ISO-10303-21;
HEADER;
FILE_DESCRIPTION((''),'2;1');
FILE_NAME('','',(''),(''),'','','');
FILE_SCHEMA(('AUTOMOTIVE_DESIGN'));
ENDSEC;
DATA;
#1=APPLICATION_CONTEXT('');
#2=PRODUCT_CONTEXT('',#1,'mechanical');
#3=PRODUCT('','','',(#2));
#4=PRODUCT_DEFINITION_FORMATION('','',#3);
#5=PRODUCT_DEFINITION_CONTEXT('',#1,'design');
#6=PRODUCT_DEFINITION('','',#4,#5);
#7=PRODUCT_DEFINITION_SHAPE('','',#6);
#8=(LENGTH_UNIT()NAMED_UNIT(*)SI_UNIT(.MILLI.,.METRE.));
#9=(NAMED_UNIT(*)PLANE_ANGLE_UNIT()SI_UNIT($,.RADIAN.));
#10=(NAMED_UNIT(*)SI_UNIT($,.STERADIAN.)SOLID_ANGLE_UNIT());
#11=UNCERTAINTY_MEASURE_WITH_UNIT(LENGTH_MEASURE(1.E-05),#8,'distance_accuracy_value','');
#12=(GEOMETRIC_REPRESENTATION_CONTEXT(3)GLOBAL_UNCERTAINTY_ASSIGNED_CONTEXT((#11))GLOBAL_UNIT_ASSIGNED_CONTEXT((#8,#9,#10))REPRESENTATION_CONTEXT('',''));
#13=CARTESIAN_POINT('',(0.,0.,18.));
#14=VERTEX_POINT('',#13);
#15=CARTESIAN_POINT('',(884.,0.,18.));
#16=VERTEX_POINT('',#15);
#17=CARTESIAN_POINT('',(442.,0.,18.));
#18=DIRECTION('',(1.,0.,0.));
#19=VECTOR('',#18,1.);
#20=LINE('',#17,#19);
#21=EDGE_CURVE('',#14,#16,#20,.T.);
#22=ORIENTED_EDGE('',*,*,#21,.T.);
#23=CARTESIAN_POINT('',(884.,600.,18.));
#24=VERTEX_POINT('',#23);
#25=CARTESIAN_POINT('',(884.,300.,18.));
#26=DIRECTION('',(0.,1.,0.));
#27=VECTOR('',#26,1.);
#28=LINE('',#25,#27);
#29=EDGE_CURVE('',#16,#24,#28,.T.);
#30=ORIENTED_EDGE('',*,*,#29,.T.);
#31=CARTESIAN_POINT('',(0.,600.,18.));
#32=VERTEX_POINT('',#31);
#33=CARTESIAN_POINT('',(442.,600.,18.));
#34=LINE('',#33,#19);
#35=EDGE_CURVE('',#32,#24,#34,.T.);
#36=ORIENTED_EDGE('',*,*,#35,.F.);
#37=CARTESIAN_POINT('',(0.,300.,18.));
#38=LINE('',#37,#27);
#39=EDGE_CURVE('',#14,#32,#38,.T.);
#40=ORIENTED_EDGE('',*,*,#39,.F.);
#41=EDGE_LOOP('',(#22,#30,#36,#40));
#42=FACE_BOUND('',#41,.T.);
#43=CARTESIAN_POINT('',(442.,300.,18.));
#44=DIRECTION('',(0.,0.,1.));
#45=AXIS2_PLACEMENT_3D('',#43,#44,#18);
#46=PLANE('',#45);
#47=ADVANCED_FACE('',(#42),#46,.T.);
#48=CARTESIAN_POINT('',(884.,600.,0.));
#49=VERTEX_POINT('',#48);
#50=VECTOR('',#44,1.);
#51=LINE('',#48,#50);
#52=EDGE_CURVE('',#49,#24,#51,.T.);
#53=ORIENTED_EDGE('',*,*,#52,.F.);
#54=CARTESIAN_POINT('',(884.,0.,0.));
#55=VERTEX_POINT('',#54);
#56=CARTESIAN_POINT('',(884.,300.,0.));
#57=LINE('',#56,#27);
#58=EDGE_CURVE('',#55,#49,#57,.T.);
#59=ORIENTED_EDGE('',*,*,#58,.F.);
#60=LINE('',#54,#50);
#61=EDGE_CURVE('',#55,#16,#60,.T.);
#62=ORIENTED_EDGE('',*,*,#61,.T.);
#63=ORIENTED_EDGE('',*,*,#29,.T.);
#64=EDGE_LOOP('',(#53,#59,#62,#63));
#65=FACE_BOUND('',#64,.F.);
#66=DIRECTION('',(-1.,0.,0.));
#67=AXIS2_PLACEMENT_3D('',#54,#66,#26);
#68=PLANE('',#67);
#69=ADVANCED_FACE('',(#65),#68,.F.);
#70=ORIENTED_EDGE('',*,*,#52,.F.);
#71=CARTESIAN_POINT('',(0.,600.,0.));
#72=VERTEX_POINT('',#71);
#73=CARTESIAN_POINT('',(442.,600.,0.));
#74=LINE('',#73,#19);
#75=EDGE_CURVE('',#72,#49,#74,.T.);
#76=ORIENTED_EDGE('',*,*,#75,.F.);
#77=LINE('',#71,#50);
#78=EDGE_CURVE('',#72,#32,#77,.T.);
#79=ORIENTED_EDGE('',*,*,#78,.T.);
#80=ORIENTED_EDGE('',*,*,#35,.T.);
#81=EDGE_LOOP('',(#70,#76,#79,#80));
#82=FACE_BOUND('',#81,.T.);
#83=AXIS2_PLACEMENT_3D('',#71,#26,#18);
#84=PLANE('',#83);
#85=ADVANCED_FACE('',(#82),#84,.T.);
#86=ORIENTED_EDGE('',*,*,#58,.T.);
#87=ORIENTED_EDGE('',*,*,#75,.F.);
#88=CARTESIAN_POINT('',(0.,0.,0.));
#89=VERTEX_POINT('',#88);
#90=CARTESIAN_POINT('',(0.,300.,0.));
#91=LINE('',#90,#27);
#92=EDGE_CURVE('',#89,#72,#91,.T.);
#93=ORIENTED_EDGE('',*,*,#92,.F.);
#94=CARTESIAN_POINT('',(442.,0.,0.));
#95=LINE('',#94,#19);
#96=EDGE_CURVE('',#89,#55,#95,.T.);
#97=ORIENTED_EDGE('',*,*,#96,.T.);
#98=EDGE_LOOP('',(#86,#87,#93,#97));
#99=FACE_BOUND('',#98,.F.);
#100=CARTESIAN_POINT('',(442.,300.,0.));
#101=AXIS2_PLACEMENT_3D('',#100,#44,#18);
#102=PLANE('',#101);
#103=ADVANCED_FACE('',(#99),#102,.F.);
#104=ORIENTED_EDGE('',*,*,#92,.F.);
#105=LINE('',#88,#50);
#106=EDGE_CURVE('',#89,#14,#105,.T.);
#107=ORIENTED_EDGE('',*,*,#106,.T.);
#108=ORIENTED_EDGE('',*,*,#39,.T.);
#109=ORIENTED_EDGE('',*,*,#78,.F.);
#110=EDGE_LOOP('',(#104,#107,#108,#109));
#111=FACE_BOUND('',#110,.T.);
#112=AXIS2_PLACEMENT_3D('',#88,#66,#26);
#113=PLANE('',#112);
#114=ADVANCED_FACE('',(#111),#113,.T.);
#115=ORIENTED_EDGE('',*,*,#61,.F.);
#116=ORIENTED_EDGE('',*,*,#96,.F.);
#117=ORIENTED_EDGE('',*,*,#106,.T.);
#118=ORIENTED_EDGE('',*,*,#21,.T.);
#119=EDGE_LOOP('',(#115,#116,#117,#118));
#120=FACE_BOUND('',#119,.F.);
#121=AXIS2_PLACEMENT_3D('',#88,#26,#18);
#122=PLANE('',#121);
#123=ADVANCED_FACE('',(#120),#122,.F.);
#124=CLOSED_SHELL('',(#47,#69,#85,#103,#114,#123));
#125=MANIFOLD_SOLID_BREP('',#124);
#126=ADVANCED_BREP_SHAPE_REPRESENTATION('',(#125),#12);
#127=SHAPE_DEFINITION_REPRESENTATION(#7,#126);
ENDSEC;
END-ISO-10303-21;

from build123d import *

# Parameters (mm, degrees)
F0_W     = 884
F0_H     = 600
F1_DEPTH = 18


# Not quite as in the source:
# - a feature of the source that left no trace in its solid (it failed there, or was rolled back) is left out


with BuildPart() as f1:
    # F0 (on Top) → F1 (new body)
    with BuildSketch(Plane.XY):
        with Locations((442, 300)):
            Rectangle(F0_W, F0_H)
    extrude(amount=F1_DEPTH)


solid = f1.part
